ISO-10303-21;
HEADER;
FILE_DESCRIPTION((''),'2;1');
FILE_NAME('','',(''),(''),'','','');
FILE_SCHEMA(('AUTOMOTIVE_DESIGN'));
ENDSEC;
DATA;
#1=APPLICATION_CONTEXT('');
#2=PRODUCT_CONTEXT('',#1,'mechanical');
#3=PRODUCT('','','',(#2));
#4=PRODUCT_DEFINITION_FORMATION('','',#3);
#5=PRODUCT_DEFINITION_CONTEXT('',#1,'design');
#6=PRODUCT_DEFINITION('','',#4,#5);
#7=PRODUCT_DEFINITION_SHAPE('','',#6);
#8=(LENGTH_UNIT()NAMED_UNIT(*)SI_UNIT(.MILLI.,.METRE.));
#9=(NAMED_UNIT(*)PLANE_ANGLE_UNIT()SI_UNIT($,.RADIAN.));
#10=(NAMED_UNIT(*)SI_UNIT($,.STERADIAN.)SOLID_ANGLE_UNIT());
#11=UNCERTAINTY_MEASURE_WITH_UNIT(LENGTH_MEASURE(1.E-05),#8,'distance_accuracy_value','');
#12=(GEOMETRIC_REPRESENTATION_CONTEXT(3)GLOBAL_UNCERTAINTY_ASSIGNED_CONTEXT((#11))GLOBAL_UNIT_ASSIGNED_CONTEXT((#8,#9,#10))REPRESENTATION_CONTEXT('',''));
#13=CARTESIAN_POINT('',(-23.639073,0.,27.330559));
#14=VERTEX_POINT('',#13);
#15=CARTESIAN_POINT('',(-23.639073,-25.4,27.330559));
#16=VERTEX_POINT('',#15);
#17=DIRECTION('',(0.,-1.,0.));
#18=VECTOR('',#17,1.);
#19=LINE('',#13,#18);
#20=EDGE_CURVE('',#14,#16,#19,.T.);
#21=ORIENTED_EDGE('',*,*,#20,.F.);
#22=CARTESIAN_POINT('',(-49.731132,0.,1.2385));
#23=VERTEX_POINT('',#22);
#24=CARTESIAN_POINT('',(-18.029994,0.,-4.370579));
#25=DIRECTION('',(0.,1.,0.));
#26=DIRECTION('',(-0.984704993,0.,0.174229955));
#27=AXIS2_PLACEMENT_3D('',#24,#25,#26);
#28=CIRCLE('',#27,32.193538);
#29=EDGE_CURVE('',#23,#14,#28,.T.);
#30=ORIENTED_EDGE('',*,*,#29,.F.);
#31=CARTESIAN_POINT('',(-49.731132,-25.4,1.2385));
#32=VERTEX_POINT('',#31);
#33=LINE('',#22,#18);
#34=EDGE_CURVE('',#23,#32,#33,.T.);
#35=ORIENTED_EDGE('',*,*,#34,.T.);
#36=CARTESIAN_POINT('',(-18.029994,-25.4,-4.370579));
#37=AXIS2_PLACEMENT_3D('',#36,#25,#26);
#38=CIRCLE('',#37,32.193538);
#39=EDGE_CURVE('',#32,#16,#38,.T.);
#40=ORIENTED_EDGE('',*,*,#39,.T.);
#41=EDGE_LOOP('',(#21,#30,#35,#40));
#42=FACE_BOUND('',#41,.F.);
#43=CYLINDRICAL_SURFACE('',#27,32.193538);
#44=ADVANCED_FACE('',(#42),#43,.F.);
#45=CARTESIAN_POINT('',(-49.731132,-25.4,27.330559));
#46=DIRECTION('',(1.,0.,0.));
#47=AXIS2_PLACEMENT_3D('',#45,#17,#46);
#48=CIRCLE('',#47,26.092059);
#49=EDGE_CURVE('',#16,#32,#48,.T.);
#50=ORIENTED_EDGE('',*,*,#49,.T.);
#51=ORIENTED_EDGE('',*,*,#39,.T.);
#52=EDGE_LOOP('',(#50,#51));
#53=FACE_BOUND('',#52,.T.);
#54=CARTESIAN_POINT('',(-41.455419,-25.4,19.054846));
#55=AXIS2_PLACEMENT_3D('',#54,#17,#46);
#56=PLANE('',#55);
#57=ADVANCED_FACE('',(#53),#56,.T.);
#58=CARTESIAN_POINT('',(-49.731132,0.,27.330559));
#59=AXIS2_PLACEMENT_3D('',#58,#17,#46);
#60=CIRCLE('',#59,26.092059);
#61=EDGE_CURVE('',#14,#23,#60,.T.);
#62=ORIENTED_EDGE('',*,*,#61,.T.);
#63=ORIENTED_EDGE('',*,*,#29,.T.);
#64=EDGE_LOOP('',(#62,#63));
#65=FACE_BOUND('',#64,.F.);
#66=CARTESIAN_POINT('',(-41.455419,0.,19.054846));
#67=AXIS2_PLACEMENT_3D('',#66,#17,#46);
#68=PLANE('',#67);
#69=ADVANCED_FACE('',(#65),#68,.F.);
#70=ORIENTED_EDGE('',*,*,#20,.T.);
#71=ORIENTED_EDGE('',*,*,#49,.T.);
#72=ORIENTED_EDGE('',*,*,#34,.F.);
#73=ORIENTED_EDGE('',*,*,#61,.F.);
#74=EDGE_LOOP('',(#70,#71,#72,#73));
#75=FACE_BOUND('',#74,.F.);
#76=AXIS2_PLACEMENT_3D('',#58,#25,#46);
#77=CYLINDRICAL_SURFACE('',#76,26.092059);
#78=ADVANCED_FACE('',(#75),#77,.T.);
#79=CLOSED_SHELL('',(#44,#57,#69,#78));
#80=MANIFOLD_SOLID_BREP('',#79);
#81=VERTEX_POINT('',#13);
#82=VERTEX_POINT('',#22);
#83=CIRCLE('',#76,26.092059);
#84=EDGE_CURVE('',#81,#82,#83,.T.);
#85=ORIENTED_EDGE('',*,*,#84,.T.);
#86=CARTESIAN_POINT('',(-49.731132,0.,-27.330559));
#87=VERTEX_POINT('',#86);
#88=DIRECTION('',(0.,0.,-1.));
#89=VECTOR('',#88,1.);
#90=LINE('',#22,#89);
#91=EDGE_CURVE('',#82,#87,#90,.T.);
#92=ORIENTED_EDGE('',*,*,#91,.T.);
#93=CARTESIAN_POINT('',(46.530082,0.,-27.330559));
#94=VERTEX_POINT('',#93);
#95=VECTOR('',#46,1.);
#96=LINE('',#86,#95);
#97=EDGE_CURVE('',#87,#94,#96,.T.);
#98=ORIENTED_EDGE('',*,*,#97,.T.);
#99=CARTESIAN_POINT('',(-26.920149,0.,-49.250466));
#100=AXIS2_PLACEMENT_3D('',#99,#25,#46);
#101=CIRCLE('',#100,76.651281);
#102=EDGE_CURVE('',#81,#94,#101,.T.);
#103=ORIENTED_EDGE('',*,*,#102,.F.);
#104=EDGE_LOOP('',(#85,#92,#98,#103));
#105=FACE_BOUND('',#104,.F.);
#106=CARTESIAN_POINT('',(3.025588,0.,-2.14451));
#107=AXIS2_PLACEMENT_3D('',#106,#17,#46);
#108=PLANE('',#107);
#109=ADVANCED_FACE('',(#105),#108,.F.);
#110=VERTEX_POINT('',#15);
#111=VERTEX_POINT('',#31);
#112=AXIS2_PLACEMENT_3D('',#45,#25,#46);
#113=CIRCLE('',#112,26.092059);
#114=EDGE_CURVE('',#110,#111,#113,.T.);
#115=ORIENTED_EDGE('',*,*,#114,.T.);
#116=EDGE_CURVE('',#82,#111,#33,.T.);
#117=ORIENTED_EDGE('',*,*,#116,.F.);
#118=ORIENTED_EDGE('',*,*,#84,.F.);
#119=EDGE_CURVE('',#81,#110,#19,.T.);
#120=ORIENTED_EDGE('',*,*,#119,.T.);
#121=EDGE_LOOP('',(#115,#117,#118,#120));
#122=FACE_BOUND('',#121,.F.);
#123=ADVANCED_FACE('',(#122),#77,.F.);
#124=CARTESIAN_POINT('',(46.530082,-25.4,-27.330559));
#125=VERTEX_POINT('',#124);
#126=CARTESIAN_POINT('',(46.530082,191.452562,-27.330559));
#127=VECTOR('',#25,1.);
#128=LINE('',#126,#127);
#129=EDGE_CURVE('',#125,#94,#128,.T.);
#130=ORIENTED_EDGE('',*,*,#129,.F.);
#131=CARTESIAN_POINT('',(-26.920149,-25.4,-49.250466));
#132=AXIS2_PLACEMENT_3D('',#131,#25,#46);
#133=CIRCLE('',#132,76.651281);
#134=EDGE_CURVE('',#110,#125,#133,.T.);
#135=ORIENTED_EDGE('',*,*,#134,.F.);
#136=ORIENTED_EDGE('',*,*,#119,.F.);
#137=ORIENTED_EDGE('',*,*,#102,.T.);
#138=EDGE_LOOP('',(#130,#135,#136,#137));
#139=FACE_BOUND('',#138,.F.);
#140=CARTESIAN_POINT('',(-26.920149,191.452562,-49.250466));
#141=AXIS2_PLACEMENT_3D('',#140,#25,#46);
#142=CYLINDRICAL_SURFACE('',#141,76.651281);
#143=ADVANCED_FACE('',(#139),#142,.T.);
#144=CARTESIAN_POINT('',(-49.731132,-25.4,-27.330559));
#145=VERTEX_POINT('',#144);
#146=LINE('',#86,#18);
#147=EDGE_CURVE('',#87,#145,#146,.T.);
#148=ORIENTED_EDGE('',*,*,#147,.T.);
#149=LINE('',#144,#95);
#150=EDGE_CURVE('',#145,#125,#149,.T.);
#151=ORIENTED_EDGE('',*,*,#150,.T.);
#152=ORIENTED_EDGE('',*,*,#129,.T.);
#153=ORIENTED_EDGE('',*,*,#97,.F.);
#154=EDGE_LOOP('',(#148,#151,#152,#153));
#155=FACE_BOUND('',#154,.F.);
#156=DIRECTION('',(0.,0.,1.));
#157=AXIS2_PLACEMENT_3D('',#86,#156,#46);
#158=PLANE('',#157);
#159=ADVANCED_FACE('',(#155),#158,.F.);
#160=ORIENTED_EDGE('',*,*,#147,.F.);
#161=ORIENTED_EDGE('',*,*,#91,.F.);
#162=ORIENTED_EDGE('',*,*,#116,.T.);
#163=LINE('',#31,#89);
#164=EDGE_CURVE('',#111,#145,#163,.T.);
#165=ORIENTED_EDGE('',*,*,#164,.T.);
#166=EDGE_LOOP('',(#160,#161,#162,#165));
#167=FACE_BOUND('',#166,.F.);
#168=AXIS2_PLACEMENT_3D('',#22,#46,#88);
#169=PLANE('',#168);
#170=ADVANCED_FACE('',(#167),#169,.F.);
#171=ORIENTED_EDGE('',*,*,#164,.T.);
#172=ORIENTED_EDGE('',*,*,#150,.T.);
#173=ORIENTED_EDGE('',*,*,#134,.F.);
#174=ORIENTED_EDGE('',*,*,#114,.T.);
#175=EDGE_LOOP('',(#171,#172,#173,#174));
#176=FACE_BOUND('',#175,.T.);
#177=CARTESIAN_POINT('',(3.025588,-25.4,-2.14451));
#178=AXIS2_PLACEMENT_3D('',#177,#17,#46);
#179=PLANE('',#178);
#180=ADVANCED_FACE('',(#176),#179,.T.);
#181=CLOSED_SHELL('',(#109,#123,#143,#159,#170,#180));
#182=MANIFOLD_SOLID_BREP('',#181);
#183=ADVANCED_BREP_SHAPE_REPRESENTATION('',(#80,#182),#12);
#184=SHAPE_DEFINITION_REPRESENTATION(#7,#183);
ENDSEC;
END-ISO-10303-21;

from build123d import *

# Parameters (mm, degrees)
F1_DEPTH    = 25.4
F2_T1_DEPTH = 408.305123953
F3_T1_DEPTH = 25.4


# Not quite as in the source:
# - a fillet or chamfer that OpenCascade refuses, or shapes differently, is made with other operations: its cross-section is extruded or revolved along the edge and cut away or added


with BuildPart() as f1:
    # F0 (on Front) → F1 (new body)
    with BuildSketch(Plane.XZ):
        with BuildLine():
            ThreePointArc((-23.6390728491, 27.3305587471), (-68.1810033514, 45.7804304554), (-49.7311316431, 1.2384999531))
            Line((-49.7311316431, 1.2384999531), (-49.7311316431, 27.3305587471))
            Line((-49.7311316431, 27.3305587471), (-23.6390728491, 27.3305587471))
        make_face()
    extrude(amount=F1_DEPTH)

    # F3: fillet of radius 32.1935378542 on 1 edges, made by hand

    # F3_s2 → F3_t1 (join)
    with BuildSketch(Plane.XZ):
        with BuildLine():
            ThreePointArc((-49.7311316431, 1.2384999531), (-40.7942631124, 18.3936902164), (-23.6390728491, 27.3305587471))
            Line((-23.6390728491, 27.3305587471), (-49.7311316431, 27.3305587471))
            Line((-49.7311316431, 27.3305587471), (-49.7311316431, 1.2384999531))
        make_face()
    extrude(amount=F3_T1_DEPTH)


with BuildPart() as f1b:
    # F0 (on Front) → F1, piece 2 (new body)
    with BuildSketch(Plane.XZ):
        with BuildLine():
            Line((-49.7311316431, -27.3305587471), (49.7311316431, -27.3305587471))
            Line((49.7311316431, -27.3305587471), (49.7311316431, 27.3305587471))
            Line((49.7311316431, 27.3305587471), (-23.6390728491, 27.3305587471))
            ThreePointArc((-23.6390728491, 27.3305587471), (-31.2812599347, 8.8806870387), (-49.7311316431, 1.2384999531))
            Line((-49.7311316431, 1.2384999531), (-49.7311316431, -27.3305587471))
        make_face()
    extrude(amount=F1_DEPTH)

    # F2: fillet of radius 76.6512806053 on 1 edges, made by hand

    # F2_s2 → F2_t1 (cut)
    with BuildSketch(Plane.XZ.offset(-191.4525619765)):
        with BuildLine():
            ThreePointArc((49.7311316431, -49.2504660436), (28.4283718141, 3.7774517574), (-23.6390728491, 27.3305587471))
            Line((-23.6390728491, 27.3305587471), (49.7311316431, 27.3305587471))
            Line((49.7311316431, 27.3305587471), (49.7311316431, -49.2504660436))
        make_face()
    extrude(amount=F2_T1_DEPTH, mode=Mode.SUBTRACT)


solid = Compound([f1.part, f1b.part])
